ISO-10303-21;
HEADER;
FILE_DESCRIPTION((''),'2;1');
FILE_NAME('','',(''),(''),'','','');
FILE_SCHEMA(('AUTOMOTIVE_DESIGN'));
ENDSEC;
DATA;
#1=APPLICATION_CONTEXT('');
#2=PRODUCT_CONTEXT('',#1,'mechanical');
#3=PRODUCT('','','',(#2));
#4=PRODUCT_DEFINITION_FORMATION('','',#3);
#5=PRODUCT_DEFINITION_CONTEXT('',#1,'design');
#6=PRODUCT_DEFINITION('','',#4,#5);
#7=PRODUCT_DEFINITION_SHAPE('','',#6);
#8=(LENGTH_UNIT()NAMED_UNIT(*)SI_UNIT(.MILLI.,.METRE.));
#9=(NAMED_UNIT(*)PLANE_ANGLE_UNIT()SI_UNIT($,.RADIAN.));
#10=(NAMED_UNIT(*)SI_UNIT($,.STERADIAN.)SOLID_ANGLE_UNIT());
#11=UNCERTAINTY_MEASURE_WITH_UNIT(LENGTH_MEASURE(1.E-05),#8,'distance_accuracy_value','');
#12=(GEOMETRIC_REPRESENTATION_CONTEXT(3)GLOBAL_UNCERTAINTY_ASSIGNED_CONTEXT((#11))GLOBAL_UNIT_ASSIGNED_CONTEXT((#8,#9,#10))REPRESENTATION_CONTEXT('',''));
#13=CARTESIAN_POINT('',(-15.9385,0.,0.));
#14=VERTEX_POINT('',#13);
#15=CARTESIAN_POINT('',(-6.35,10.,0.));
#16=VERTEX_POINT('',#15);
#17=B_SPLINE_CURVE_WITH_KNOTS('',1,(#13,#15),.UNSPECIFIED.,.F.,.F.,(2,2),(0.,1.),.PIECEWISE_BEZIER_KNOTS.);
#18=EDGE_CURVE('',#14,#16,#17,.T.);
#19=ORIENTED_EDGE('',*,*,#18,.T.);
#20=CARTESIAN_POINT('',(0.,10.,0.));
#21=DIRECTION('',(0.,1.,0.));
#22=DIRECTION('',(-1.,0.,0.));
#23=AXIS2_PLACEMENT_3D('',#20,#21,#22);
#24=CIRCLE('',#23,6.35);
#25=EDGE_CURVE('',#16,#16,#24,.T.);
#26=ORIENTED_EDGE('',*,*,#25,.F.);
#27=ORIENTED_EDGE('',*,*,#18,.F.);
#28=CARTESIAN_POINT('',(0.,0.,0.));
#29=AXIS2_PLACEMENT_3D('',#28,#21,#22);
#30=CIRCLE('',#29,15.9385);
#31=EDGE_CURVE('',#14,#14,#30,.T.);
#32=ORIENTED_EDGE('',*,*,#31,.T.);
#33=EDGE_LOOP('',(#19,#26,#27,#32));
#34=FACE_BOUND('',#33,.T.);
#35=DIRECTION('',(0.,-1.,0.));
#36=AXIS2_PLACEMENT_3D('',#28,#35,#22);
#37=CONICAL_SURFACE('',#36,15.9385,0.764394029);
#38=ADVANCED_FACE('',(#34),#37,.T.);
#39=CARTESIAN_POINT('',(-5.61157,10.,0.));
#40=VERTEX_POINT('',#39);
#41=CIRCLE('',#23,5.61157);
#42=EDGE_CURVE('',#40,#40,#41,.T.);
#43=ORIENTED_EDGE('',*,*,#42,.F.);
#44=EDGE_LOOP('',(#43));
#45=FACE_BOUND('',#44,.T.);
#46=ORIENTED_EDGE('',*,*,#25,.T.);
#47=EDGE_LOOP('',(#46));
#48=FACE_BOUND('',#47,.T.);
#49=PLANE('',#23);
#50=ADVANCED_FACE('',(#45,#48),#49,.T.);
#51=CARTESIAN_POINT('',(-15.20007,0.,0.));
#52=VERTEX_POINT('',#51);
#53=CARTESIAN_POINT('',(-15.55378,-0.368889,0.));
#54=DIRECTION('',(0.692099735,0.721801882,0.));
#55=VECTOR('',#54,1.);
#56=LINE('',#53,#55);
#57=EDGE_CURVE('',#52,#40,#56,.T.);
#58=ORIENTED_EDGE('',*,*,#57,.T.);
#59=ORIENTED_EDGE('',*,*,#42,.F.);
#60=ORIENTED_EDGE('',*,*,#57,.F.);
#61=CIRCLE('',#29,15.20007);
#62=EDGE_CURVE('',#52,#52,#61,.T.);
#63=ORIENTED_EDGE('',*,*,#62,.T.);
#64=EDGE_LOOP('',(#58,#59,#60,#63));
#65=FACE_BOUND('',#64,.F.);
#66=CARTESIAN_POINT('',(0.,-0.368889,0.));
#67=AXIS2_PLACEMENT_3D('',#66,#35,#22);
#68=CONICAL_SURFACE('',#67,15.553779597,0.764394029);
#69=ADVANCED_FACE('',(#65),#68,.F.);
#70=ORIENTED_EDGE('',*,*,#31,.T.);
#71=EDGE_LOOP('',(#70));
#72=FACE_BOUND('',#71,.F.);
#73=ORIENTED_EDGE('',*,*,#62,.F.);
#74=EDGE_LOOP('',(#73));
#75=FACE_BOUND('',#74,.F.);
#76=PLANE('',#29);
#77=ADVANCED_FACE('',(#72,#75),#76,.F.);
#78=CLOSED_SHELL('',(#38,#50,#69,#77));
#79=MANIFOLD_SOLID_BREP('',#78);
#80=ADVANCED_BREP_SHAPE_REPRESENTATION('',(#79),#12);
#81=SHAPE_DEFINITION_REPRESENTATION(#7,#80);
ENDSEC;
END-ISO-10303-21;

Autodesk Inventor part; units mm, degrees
ref_plane "YZ Plane" through (0, 0, 0) normal (1, 0, 0) x (0, 1, 0)
ref_plane "XY Plane" through (0, 0, 0) normal (0, 0, 1) x (1, 0, 0)
sketch "Sketch1" plane through (0, 0, 0) normal (0, 1, 0) x (-1, 0, 0)
  circle A0 centre (0, 0) radius 15.9385
  dimension "d0" = 31.877
ref_plane "Work Plane1" through (0, 10, 0) normal (0, 1, 0) x (-1, 0, 0)
sketch "Sketch7" plane through (0, 10, 0) normal (0, 1, 0) x (-1, 0, 0)
  circle A0 centre (0, 0) radius 6.35
  dimension "d16" = 12.7
loft "Loft3" add profiles "Sketch1", "Sketch7"
shell "Shell3" thickness 0.533 removed faces 2 at (1.8127, 10, -0.4771) at (0.7499, 0, -4.3724)
sketch "Sketch8" plane through (0, 10, 0) normal (0, 1, 0) x (-1, 0, 0)
  circle A0 centre (0, 0) radius 6.35 projected
properties part number "DPLX_P009_Wire_Mesh_reducer_Trans"
